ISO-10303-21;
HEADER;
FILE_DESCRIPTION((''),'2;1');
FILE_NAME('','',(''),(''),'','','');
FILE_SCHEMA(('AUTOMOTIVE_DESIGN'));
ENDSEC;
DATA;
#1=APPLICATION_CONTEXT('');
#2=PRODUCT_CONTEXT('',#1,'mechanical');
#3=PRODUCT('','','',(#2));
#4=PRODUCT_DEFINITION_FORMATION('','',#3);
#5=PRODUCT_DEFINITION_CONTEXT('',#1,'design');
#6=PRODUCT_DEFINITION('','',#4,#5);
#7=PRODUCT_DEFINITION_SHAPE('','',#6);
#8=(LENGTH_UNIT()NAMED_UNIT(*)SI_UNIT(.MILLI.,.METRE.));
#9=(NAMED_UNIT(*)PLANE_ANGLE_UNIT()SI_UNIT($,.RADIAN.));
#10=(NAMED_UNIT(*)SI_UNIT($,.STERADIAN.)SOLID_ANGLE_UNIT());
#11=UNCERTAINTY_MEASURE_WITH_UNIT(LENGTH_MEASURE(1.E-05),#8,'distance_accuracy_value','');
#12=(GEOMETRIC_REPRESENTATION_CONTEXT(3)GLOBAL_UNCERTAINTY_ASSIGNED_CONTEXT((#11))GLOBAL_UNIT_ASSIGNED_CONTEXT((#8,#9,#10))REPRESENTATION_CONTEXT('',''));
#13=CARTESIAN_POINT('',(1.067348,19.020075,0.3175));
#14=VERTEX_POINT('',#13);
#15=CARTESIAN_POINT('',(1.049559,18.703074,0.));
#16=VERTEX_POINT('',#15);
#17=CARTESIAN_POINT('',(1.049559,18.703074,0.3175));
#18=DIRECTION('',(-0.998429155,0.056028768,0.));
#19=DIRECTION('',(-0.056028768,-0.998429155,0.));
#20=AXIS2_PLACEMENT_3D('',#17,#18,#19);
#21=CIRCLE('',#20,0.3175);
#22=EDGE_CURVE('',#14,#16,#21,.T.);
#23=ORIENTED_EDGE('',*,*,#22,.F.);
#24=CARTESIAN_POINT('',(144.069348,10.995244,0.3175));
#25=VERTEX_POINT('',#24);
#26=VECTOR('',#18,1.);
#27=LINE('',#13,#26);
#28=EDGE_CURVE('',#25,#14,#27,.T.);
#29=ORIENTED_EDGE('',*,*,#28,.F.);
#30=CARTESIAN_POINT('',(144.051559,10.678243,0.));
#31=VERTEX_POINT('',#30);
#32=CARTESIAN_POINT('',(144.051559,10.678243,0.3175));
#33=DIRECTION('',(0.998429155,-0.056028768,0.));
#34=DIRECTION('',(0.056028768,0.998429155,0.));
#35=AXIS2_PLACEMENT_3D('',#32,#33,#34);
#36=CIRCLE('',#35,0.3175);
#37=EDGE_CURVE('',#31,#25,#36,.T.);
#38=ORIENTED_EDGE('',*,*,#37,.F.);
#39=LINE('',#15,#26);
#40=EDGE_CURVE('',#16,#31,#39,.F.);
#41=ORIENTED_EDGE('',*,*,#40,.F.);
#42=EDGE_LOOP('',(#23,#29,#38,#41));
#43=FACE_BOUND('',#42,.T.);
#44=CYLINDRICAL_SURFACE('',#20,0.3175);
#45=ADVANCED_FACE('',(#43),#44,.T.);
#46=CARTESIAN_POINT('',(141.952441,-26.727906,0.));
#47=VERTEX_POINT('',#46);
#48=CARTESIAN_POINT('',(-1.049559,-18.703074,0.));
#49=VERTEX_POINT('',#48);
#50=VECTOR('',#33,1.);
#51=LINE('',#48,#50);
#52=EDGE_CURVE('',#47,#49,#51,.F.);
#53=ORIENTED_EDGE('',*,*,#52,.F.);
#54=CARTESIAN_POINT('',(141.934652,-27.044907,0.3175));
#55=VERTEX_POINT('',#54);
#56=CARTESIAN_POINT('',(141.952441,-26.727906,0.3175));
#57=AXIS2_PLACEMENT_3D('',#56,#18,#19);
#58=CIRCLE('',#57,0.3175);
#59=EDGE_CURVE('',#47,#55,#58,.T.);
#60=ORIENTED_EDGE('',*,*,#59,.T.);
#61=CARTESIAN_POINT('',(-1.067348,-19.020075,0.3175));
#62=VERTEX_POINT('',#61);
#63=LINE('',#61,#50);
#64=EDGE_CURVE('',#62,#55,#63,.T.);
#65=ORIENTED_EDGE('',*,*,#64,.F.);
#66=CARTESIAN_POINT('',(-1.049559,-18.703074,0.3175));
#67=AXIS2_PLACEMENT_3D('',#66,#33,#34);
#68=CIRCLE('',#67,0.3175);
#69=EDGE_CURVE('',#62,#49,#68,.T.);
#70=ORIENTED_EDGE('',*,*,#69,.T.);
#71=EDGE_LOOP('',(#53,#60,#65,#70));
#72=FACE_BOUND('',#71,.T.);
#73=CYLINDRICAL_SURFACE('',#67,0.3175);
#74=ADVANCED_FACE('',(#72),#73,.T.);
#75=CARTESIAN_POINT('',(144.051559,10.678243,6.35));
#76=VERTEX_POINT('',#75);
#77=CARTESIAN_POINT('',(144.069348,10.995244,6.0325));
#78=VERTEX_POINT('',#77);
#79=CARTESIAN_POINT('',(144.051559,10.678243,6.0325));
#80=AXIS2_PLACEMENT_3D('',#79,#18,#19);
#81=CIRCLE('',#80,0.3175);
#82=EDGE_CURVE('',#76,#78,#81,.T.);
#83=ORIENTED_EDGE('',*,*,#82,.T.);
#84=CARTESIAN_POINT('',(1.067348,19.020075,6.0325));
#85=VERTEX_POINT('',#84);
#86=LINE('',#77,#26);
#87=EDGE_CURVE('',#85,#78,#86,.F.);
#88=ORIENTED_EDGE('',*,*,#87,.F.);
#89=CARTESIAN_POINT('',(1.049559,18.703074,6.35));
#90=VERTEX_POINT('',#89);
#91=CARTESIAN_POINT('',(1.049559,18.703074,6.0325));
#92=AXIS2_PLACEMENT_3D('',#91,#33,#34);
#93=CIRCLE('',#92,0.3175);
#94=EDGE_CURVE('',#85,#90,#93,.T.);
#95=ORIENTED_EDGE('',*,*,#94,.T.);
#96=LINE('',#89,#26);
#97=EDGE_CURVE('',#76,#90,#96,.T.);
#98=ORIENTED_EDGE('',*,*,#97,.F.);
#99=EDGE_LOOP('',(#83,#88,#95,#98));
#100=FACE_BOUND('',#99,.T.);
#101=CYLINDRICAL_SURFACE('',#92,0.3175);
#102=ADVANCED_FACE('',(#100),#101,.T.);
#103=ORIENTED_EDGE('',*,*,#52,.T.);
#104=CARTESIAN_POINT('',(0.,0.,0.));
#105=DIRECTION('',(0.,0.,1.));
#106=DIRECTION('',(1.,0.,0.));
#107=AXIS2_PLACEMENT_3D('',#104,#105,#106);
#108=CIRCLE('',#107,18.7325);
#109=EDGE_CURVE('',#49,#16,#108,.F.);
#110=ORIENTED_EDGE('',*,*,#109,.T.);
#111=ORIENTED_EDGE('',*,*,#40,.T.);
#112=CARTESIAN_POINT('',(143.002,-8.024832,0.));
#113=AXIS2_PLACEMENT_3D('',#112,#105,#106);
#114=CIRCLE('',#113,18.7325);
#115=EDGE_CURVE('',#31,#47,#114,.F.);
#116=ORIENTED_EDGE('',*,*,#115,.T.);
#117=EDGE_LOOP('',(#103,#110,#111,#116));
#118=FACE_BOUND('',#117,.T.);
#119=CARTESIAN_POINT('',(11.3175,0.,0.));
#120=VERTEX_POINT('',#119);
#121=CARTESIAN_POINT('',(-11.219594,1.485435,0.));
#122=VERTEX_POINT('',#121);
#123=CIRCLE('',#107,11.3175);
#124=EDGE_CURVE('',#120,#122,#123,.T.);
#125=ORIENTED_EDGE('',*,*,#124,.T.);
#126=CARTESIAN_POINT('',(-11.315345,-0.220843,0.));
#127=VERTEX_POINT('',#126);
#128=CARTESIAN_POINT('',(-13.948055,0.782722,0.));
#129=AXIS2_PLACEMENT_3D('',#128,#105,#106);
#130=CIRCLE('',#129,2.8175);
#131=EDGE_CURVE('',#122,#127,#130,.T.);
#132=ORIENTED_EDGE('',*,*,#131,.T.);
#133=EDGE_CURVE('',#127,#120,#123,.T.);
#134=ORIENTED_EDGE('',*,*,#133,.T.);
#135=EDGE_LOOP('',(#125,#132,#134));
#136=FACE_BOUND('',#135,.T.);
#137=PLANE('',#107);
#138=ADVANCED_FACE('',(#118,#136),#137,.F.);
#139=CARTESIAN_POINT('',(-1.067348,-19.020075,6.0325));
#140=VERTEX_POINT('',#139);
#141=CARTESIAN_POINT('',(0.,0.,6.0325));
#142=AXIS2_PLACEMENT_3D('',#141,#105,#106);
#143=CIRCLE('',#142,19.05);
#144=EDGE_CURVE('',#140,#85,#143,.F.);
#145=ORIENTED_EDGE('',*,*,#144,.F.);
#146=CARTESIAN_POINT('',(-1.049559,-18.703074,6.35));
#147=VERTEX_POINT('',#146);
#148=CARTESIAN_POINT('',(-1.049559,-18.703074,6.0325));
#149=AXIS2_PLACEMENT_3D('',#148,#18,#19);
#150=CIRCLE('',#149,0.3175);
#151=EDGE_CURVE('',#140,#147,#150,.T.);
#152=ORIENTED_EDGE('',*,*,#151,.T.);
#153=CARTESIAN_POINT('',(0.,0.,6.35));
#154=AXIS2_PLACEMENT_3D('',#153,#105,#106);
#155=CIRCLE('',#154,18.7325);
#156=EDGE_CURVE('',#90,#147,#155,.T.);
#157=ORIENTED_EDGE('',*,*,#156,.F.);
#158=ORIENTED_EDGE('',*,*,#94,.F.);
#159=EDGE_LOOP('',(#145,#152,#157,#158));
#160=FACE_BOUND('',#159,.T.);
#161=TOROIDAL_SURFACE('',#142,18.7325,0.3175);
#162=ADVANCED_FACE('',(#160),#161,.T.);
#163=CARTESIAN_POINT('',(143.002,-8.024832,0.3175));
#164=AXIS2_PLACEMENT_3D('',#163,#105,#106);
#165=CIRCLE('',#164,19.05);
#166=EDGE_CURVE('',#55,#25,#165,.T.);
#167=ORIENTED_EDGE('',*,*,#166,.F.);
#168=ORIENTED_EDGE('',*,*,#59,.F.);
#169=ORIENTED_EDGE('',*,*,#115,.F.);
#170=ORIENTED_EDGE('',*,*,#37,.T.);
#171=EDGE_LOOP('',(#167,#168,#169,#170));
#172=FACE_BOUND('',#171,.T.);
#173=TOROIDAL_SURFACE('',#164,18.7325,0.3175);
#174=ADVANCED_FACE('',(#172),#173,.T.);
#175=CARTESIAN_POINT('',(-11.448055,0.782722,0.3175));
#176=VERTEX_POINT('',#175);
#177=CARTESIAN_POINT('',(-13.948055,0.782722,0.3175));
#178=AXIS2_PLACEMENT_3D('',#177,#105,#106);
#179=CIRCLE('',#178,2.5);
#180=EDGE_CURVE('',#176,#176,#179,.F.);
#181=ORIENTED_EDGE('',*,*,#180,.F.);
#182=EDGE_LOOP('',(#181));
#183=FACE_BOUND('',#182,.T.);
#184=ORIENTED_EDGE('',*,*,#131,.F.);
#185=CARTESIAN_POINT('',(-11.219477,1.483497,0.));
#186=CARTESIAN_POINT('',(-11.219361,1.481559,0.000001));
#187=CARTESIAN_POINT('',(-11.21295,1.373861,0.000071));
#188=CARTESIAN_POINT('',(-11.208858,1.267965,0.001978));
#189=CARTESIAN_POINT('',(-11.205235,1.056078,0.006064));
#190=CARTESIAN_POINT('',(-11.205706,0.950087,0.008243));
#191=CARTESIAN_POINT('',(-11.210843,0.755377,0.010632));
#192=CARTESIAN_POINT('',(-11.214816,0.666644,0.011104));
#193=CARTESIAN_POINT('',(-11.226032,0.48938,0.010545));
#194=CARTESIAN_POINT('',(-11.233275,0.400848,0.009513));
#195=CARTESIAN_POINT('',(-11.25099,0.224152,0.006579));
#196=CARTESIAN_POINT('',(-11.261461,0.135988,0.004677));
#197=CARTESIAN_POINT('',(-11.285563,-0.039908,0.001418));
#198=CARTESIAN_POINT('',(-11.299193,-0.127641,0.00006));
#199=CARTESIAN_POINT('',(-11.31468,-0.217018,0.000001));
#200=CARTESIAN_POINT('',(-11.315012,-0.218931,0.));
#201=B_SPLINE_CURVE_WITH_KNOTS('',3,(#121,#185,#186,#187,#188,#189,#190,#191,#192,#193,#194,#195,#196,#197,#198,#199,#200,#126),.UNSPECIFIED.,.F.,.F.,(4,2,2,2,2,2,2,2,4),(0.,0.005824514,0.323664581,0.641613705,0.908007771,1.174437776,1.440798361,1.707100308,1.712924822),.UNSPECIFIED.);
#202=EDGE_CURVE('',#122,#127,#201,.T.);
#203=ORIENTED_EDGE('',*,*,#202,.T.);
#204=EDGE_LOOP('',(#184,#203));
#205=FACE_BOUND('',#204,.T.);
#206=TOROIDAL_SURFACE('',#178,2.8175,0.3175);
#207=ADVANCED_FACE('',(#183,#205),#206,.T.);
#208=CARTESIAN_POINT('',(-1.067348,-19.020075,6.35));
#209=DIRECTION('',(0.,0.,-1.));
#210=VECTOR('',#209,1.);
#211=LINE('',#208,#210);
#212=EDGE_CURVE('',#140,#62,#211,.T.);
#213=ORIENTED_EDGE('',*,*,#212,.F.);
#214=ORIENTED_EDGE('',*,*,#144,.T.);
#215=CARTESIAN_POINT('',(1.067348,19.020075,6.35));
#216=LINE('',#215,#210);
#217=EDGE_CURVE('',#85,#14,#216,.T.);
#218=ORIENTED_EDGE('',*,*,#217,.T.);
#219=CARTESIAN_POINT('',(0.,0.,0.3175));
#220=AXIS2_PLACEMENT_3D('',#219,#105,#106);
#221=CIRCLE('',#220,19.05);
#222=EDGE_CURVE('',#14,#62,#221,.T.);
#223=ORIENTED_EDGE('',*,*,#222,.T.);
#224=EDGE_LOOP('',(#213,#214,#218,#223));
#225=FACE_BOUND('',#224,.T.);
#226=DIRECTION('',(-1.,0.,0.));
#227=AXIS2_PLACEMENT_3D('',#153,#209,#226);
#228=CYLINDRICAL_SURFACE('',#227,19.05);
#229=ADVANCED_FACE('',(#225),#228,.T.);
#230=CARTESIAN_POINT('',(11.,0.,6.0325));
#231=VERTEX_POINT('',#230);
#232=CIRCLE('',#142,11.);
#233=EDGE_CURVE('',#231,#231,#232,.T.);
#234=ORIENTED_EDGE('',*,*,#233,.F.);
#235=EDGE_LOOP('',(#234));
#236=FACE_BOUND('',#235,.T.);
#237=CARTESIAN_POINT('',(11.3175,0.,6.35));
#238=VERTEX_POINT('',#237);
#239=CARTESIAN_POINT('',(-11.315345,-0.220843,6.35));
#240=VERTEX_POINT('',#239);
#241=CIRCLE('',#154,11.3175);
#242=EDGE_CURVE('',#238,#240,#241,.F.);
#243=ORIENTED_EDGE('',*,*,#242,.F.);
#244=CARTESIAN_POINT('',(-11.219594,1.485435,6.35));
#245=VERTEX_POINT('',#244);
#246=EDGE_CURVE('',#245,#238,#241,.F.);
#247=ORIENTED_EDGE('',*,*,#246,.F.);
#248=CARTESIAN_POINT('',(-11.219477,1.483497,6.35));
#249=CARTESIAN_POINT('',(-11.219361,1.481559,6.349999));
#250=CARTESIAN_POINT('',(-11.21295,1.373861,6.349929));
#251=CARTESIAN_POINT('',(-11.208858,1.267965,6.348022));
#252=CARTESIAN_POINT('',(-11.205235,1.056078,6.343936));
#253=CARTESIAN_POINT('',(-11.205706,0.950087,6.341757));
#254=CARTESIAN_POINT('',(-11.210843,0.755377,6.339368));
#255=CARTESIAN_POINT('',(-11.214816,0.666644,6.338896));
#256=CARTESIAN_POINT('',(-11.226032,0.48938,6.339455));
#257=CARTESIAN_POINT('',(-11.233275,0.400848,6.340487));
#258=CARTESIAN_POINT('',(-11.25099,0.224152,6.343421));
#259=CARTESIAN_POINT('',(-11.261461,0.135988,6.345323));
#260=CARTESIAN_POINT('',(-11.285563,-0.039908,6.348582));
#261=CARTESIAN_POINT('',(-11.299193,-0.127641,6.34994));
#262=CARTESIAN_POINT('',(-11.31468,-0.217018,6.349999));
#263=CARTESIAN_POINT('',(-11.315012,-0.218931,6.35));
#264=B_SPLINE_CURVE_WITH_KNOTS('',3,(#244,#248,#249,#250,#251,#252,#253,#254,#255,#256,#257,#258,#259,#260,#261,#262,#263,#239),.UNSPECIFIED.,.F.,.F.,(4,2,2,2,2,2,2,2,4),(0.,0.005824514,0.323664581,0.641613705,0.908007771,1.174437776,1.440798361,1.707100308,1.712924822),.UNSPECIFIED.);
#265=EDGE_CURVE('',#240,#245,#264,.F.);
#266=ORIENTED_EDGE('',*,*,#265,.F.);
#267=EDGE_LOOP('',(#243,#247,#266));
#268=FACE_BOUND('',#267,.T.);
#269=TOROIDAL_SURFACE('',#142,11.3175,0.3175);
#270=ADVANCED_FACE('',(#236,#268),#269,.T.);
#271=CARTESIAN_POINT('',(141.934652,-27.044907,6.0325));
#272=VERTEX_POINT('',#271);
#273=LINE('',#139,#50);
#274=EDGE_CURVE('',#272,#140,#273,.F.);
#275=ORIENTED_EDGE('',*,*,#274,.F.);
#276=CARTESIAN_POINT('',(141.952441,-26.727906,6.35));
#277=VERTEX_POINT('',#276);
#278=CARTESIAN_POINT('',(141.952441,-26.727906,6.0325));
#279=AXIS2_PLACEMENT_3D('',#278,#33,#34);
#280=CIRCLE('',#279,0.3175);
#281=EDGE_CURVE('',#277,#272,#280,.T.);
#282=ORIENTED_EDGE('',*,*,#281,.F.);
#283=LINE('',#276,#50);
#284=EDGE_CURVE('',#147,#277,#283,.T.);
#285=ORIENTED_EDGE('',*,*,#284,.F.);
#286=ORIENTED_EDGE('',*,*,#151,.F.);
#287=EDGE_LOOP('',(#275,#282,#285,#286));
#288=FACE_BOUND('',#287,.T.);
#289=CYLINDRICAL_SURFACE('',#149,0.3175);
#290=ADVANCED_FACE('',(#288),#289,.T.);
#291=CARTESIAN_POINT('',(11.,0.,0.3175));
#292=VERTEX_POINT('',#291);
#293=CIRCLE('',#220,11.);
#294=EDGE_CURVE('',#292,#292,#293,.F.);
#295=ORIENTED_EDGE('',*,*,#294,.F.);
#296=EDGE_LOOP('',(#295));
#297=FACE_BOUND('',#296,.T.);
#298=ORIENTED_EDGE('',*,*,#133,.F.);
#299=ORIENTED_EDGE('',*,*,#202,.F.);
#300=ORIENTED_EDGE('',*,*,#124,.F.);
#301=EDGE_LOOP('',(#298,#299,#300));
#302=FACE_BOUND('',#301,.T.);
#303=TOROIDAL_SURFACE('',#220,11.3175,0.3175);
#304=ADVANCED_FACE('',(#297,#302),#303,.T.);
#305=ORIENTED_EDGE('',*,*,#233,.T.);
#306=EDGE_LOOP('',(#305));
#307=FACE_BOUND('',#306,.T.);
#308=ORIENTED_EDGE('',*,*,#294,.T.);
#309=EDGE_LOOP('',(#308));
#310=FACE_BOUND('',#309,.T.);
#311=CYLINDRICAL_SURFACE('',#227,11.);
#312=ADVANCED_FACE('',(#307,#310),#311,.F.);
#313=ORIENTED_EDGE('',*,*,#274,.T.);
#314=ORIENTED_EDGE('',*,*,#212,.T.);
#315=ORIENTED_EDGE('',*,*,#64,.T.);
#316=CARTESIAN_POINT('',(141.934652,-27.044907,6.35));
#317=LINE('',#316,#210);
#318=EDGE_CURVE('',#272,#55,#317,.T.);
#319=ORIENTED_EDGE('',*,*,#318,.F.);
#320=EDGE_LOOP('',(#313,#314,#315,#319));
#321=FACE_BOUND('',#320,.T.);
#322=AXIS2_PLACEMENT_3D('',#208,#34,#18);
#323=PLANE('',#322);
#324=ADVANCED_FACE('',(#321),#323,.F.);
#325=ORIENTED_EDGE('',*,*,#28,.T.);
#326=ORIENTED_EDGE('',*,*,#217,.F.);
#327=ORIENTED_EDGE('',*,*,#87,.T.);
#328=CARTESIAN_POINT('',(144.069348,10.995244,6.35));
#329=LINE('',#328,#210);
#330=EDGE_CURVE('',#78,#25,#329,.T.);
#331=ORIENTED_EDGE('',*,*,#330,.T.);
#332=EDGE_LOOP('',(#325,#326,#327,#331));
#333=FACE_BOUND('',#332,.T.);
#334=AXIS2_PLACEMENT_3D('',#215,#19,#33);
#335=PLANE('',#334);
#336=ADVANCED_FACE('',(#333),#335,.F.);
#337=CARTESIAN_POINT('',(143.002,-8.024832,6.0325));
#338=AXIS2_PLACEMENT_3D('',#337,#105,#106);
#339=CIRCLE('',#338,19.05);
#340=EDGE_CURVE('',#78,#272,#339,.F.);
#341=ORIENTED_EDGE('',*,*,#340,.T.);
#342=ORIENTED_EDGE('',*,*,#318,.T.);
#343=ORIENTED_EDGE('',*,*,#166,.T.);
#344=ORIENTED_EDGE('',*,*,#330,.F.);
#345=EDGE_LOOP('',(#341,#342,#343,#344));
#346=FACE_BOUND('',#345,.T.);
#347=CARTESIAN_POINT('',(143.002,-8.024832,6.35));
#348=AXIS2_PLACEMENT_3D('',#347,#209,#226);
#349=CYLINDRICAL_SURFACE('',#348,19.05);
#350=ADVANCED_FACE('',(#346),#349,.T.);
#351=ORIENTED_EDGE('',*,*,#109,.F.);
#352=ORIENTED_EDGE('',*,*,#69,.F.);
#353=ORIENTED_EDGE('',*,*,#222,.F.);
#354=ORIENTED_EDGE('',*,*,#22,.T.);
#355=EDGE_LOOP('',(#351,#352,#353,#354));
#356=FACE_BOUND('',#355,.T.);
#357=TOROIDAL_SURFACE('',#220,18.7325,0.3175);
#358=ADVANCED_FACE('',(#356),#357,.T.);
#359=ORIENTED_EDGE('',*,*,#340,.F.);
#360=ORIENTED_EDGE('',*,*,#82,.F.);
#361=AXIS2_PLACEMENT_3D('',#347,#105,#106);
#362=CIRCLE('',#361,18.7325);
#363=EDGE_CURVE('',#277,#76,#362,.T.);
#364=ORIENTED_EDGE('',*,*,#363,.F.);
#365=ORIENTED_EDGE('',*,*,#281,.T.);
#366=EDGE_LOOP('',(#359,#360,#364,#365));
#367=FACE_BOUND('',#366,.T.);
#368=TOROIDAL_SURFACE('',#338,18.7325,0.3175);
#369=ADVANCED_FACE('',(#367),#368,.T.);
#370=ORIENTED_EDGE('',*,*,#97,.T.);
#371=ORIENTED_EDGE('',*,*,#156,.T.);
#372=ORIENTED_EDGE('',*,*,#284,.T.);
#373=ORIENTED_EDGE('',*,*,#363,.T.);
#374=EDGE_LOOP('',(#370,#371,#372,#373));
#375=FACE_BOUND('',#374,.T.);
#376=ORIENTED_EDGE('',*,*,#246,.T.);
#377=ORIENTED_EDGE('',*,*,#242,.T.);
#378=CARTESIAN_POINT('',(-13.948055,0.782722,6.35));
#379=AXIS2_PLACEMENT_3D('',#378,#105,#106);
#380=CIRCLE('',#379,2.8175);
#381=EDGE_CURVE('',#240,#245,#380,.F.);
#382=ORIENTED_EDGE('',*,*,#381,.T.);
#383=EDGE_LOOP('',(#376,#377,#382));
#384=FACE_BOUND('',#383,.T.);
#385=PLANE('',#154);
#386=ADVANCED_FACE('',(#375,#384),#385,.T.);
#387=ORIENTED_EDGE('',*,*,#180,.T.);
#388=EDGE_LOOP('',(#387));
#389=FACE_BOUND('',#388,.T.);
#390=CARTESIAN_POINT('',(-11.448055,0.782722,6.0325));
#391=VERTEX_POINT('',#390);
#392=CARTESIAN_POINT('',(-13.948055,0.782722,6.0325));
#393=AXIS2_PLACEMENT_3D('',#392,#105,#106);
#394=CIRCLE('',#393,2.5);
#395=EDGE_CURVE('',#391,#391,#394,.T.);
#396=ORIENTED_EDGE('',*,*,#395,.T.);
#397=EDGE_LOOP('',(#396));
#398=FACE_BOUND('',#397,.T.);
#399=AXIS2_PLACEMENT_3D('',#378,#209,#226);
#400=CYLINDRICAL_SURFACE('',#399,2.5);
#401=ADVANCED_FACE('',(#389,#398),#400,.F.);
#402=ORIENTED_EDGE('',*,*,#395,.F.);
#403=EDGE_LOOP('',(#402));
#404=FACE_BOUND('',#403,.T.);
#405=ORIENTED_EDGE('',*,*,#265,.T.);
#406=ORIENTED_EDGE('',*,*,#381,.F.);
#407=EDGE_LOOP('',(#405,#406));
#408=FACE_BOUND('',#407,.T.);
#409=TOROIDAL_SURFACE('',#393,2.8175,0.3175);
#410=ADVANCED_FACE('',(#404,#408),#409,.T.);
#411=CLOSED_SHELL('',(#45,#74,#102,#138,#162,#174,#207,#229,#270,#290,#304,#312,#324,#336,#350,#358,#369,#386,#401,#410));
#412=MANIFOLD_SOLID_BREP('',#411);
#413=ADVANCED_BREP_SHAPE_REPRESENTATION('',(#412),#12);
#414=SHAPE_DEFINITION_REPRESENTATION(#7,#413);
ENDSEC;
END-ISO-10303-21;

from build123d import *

# Parameters (mm, degrees)
SKETCH1_R           = 11
SKETCH1_R_2         = 2.499999953
BOSS_EXTRUDE1_DEPTH = 6.35
FILLET1_R           = 0.3175


with BuildPart() as part:
    # Sketch1 → Boss-Extrude1 (new body)
    with BuildSketch(Plane.XY):
        with BuildLine():
            Line((1.067348026, 19.020075399), (144.069348026, 10.995243779))
            ThreePointArc((144.069348026, 10.995243779), (162.022075399, -9.092179646), (141.934651974, -27.044907019))
            Line((141.934651974, -27.044907019), (-1.067348026, -19.020075399))
            ThreePointArc((-1.067348026, -19.020075399), (-19.020075399, 1.067348026), (1.067348026, 19.020075399))
        make_face()
        Circle(SKETCH1_R, mode=Mode.SUBTRACT)
        with Locations((-13.948055293, 0.782721886)):
            Circle(SKETCH1_R_2, mode=Mode.SUBTRACT)
    extrude(amount=BOSS_EXTRUDE1_DEPTH)

    # Fillet1
    # the kernel refuses this fillet: 0.3175 mm, written as the material it takes off along each edge
    with BuildSketch(Plane(origin=(143.002, -8.02483162, 6.35), x_dir=(0.05602876779124647, 0.9984291548125959, 0), z_dir=(-0.9984291548125959, 0.05602876779124647, 0))) as fillet1_piece_1:
        with BuildLine():
            CenterArc((19.05 - FILLET1_R, FILLET1_R), FILLET1_R, 270, 90)
            Line((19.05 - FILLET1_R, 0), (19.05, 0))
            Line((19.05, 0), (19.05, FILLET1_R))
        make_face()
    revolve(axis=Axis((143.002, -8.02483162, 6.35), (0, 0, -1)), revolution_arc=180, mode=Mode.SUBTRACT)
    with BuildSketch(Plane(origin=(0, 0, 0), x_dir=(1, 0, 0), z_dir=(0, -1, 0))) as fillet1_piece_2:
        with BuildLine():
            CenterArc((11 + FILLET1_R, FILLET1_R), FILLET1_R, 180, 90)
            Line((11 + FILLET1_R, 0), (11, 0))
            Line((11, 0), (11, FILLET1_R))
        make_face()
    revolve(axis=Axis((0, 0, 0), (0, 0, 1)), mode=Mode.SUBTRACT)
    with BuildSketch(Plane(origin=(0, 0, 6.35), x_dir=(1, 0, 0), z_dir=(0, -1, 0))) as fillet1_piece_3:
        with BuildLine():
            CenterArc((11 + FILLET1_R, -FILLET1_R), FILLET1_R, 90, 90)
            Line((11 + FILLET1_R, 0), (11, 0))
            Line((11, 0), (11, -FILLET1_R))
        make_face()
    revolve(axis=Axis((0, 0, 6.35), (0, 0, 1)), mode=Mode.SUBTRACT)
    with BuildSketch(Plane(origin=(1.067348026, 19.020075399, 6.35), x_dir=(0, 0, -1), z_dir=(0.998429154812596, -0.056028767791246756, 0)), Plane(origin=(141.934651974, -27.044907019, 6.35), x_dir=(0, 0, -1), z_dir=(-0.998429154812596, 0.05602876779124666, 0))) as fillet1_piece_4:
        with BuildLine():
            CenterArc((FILLET1_R, -FILLET1_R), FILLET1_R, 90, 90)
            Line((0, -FILLET1_R), (0, 0))
            Line((0, 0), (FILLET1_R, 0))
        make_face()
    extrude(amount=143.226987424, mode=Mode.SUBTRACT)
    with BuildSketch(Plane(origin=(-13.948055293, 0.782721886, 0), x_dir=(1, 0, 0), z_dir=(0, -1, 0))) as fillet1_piece_5:
        with BuildLine():
            CenterArc((2.499999953 + FILLET1_R, FILLET1_R), FILLET1_R, 180, 90)
            Line((2.499999953 + FILLET1_R, 0), (2.499999953, 0))
            Line((2.499999953, 0), (2.499999953, FILLET1_R))
        make_face()
    revolve(axis=Axis((-13.948055293, 0.782721886, 0), (0, 0, 1)), mode=Mode.SUBTRACT)
    with BuildSketch(Plane(origin=(-13.948055293, 0.782721886, 6.35), x_dir=(1, 0, 0), z_dir=(0, -1, 0))) as fillet1_piece_6:
        with BuildLine():
            CenterArc((2.499999953 + FILLET1_R, -FILLET1_R), FILLET1_R, 90, 90)
            Line((2.499999953 + FILLET1_R, 0), (2.499999953, 0))
            Line((2.499999953, 0), (2.499999953, -FILLET1_R))
        make_face()
    revolve(axis=Axis((-13.948055293, 0.782721886, 6.35), (0, 0, 1)), mode=Mode.SUBTRACT)
    with BuildSketch(Plane(origin=(0, 0, 6.35), x_dir=(-0.05602876779124687, -0.9984291548125959, 0), z_dir=(0.9984291548125959, -0.05602876779124687, 0))) as fillet1_piece_7:
        with BuildLine():
            CenterArc((19.05 - FILLET1_R, FILLET1_R), FILLET1_R, 270, 90)
            Line((19.05 - FILLET1_R, 0), (19.05, 0))
            Line((19.05, 0), (19.05, FILLET1_R))
        make_face()
    revolve(axis=Axis((0, 0, 6.35), (0, 0, -1)), revolution_arc=180, mode=Mode.SUBTRACT)
    with BuildSketch(Plane(origin=(1.067348026, 19.020075399, 0), x_dir=(0, 0, 1), z_dir=(0.998429154812596, -0.056028767791246756, 0)), Plane(origin=(141.934651974, -27.044907019, 0), x_dir=(0, 0, 1), z_dir=(-0.998429154812596, 0.05602876779124666, 0))) as fillet1_piece_8:
        with BuildLine():
            CenterArc((FILLET1_R, FILLET1_R), FILLET1_R, 180, 90)
            Line((0, FILLET1_R), (0, 0))
            Line((0, 0), (FILLET1_R, 0))
        make_face()
    extrude(amount=143.226987424, mode=Mode.SUBTRACT)
    with BuildSketch(Plane(origin=(143.002, -8.02483162, 0), x_dir=(0.05602876779124647, 0.9984291548125959, 0), z_dir=(-0.9984291548125959, 0.05602876779124647, 0))) as fillet1_piece_9:
        with BuildLine():
            CenterArc((19.05 - FILLET1_R, -FILLET1_R), FILLET1_R, 0, 90)
            Line((19.05 - FILLET1_R, 0), (19.05, 0))
            Line((19.05, 0), (19.05, -FILLET1_R))
        make_face()
    revolve(axis=Axis((143.002, -8.02483162, 0), (0, 0, -1)), revolution_arc=180, mode=Mode.SUBTRACT)
    with BuildSketch(Plane(origin=(0, 0, 0), x_dir=(-0.05602876779124687, -0.9984291548125959, 0), z_dir=(0.9984291548125959, -0.05602876779124687, 0))) as fillet1_piece_10:
        with BuildLine():
            CenterArc((19.05 - FILLET1_R, -FILLET1_R), FILLET1_R, 0, 90)
            Line((19.05 - FILLET1_R, 0), (19.05, 0))
            Line((19.05, 0), (19.05, -FILLET1_R))
        make_face()
    revolve(axis=Axis((0, 0, 0), (0, 0, -1)), revolution_arc=180, mode=Mode.SUBTRACT)


solid = part.part
